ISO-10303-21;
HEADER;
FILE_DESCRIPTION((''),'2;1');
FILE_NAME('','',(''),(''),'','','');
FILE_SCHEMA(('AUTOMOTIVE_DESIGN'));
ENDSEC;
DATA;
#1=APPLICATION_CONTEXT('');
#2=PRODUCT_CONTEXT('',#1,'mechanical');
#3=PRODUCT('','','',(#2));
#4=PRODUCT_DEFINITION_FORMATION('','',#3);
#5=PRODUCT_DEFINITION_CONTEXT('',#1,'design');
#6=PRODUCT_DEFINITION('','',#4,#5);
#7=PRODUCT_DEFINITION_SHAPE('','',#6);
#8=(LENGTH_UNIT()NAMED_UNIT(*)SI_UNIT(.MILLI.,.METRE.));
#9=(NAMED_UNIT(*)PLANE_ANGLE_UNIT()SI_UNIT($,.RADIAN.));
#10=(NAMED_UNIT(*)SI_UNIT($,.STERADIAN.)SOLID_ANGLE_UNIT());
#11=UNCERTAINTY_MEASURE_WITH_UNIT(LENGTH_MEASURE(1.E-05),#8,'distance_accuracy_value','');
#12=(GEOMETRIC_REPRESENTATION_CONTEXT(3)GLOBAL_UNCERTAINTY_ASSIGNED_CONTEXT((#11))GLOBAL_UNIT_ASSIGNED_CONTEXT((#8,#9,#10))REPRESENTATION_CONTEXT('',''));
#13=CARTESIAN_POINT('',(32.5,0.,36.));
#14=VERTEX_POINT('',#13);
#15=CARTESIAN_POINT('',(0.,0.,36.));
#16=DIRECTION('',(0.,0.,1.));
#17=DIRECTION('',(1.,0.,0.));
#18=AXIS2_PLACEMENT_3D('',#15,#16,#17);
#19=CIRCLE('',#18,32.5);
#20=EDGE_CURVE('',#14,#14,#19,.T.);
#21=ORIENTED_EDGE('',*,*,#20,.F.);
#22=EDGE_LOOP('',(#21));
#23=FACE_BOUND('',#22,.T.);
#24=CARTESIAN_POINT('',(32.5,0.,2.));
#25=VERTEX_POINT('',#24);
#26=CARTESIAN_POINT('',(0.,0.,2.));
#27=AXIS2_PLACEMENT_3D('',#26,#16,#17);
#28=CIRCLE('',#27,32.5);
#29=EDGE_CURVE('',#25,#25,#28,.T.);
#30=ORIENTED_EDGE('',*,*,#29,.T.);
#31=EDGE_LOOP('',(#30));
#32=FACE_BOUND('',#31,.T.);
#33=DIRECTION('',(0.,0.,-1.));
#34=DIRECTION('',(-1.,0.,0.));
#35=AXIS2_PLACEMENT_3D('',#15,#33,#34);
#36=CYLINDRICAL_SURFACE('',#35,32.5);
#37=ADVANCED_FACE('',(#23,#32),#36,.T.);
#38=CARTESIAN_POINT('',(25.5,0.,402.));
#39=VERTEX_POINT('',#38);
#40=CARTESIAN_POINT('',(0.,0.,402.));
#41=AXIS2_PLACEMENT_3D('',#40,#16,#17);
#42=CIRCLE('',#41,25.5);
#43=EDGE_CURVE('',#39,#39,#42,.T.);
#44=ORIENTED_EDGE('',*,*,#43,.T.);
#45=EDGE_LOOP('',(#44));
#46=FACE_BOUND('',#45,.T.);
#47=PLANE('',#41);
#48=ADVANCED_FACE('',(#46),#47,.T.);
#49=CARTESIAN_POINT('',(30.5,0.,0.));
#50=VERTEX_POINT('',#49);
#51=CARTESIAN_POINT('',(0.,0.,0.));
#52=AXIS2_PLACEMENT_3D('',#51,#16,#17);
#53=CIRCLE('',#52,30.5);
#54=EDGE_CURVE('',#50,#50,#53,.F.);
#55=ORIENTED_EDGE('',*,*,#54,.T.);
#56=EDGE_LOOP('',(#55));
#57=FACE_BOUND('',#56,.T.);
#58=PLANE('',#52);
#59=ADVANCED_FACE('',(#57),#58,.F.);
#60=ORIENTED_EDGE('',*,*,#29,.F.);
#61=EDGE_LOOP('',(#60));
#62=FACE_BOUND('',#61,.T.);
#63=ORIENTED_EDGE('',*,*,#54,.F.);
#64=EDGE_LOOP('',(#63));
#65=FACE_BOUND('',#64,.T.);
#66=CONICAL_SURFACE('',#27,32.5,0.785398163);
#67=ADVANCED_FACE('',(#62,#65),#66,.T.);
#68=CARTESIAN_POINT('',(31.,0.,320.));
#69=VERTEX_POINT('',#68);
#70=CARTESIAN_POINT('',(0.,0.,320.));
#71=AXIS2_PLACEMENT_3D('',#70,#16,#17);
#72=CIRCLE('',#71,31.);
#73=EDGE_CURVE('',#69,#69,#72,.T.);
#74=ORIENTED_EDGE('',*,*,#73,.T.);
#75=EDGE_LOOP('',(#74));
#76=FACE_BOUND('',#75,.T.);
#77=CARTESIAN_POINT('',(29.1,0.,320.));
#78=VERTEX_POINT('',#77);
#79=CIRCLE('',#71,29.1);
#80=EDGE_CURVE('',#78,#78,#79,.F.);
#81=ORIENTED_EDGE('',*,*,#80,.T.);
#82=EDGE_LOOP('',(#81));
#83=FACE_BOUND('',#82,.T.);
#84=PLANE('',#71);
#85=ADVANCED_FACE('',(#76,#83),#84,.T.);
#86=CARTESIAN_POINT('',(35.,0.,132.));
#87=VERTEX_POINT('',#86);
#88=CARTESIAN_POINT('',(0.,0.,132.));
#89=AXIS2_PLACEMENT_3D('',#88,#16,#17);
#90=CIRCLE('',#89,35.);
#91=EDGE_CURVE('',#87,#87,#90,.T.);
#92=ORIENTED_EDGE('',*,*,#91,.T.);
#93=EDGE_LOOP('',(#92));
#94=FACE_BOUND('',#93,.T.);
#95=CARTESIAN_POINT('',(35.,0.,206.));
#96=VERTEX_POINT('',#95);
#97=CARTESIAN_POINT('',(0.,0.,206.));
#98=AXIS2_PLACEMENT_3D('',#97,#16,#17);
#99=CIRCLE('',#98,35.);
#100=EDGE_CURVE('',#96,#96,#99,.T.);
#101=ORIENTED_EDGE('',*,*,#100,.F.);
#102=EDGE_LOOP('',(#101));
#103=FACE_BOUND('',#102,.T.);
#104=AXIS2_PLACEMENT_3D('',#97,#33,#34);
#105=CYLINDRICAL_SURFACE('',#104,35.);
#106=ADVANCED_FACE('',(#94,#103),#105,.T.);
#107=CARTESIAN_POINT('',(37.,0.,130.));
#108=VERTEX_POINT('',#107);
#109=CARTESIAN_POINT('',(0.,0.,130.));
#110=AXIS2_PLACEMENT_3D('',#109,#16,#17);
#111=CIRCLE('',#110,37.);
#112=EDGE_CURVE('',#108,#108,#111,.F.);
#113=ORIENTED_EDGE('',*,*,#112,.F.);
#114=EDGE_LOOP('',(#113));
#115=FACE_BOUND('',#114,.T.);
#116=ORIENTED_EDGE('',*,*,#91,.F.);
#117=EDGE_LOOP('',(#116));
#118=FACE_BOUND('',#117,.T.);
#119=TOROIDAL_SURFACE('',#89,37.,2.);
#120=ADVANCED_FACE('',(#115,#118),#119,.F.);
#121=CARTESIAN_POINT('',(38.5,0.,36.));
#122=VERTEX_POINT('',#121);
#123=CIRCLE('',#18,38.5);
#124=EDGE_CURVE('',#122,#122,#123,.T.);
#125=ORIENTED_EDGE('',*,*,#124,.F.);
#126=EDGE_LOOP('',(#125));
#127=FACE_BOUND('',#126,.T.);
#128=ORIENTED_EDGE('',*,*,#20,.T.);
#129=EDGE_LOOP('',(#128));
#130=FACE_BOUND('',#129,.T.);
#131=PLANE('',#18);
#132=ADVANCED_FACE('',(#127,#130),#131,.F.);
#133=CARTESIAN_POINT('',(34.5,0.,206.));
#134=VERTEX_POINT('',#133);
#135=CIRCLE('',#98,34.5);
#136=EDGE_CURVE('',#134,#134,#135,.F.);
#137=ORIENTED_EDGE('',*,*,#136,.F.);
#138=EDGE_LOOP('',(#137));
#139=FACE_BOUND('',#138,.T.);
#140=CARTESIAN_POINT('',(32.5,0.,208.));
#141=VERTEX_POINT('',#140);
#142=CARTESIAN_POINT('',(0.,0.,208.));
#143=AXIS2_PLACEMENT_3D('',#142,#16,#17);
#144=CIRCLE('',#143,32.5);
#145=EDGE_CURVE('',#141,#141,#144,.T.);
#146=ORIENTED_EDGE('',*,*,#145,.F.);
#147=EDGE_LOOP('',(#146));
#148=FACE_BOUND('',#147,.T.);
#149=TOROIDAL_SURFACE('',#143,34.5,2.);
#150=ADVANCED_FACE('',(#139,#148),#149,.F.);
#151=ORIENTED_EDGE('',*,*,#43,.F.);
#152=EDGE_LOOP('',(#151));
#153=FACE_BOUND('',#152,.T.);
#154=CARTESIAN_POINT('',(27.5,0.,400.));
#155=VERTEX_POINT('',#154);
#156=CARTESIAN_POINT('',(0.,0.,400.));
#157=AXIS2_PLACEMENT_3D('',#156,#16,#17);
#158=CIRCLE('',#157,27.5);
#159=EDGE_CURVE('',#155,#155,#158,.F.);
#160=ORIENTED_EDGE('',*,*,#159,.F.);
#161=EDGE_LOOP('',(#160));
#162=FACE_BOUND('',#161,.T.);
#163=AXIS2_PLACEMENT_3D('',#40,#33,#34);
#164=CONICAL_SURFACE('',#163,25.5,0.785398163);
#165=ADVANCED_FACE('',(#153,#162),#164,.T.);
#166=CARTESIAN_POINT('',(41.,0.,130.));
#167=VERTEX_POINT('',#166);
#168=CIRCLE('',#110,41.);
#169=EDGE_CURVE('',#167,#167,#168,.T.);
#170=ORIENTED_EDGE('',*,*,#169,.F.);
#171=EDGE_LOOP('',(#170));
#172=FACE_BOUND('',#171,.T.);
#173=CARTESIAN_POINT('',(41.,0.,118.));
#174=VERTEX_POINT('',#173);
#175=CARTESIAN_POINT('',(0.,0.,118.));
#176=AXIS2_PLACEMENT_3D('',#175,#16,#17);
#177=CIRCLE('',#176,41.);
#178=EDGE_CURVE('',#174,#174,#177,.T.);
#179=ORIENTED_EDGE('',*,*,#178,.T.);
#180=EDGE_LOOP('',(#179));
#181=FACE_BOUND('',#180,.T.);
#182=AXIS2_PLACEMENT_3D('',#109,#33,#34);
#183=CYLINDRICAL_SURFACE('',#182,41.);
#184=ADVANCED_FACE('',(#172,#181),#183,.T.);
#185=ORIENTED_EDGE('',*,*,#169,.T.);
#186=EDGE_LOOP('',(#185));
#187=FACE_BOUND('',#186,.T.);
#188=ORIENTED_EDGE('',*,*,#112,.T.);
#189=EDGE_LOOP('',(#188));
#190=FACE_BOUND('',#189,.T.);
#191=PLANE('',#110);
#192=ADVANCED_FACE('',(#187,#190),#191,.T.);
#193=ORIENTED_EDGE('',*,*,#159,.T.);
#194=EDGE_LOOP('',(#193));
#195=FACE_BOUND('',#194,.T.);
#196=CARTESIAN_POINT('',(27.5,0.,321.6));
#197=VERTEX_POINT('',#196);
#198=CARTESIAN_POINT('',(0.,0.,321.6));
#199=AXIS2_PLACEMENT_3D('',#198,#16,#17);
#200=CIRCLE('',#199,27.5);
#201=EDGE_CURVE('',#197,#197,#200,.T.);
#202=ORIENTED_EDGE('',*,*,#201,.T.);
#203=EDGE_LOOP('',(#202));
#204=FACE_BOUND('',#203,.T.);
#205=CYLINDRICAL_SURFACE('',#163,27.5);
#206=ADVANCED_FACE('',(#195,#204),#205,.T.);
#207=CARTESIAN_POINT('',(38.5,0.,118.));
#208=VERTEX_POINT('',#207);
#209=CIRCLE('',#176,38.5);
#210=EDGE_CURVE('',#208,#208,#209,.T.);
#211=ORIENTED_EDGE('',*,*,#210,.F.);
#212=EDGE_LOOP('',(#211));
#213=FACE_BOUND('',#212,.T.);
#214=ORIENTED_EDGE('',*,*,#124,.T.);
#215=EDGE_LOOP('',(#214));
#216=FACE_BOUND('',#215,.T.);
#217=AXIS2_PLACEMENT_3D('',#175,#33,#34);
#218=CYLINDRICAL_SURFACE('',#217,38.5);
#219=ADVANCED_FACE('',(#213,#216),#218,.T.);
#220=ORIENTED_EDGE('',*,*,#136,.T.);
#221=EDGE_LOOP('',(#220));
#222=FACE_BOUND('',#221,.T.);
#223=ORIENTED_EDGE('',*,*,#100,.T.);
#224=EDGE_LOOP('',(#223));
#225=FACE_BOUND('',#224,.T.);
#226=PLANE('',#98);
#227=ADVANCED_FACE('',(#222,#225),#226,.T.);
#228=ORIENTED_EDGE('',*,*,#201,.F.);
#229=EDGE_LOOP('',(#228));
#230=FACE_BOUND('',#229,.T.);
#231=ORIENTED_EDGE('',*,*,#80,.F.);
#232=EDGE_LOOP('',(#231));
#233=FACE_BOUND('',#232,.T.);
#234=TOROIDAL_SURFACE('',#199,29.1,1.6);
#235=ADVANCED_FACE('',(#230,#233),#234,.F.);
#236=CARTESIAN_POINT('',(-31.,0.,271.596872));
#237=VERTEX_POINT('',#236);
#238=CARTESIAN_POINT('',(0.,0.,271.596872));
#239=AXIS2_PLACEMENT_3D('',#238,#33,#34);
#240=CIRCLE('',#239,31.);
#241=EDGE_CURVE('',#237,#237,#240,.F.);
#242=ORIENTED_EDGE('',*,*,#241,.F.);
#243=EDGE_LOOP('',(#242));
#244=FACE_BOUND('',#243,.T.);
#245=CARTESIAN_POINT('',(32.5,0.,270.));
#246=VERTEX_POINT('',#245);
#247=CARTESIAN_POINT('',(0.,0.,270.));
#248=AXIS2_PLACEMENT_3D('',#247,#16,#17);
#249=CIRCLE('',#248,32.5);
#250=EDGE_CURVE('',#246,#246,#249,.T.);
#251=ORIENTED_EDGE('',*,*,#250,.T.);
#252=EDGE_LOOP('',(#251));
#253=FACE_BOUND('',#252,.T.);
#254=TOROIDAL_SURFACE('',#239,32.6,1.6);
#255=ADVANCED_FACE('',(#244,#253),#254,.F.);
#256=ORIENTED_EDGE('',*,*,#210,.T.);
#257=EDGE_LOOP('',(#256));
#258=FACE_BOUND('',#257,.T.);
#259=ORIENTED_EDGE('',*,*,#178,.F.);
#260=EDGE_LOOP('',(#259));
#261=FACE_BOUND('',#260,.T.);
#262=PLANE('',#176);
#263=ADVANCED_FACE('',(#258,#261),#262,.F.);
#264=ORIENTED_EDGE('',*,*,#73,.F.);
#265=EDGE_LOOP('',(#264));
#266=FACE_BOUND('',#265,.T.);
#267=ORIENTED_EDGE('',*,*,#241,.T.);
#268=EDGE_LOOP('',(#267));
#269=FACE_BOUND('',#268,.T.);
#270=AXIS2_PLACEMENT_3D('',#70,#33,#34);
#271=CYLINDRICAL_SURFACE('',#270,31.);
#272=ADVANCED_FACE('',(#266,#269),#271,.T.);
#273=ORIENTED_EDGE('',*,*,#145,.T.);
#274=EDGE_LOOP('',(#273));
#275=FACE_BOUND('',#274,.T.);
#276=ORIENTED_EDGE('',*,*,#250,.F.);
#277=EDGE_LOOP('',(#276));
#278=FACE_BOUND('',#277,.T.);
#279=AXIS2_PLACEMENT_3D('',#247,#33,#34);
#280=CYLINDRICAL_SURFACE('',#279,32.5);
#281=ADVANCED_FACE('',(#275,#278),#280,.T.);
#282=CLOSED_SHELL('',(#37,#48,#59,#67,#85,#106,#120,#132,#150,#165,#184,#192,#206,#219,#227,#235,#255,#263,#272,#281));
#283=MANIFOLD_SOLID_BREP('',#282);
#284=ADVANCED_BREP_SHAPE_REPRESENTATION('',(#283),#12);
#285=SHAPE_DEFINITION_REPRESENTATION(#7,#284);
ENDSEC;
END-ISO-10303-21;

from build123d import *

# Parameters (mm, degrees)
SKETCH_1_R      = 32.5
EXTRUDE_1_DEPTH = 36
SKETCH_2_R      = 38.5
EXTRUDE_2_DEPTH = 82
SKETCH_3_R      = 41
EXTRUDE_3_DEPTH = 12
SKETCH_4_R      = 35
EXTRUDE_4_DEPTH = 76
SKETCH_5_R      = 32.5
EXTRUDE_5_DEPTH = 64
SKETCH_6_R      = 31
EXTRUDE_6_DEPTH = 50
SKETCH_7_R      = 27.5
EXTRUDE_7_DEPTH = 82
FILLET_1_R      = 2
FILLET_2_R      = 1.6
CHAMFER_1_SIZE  = 2


with BuildPart() as part:
    # 草图1 → 凸台-拉伸1 (new body)
    with BuildSketch(Plane.XY):
        Circle(SKETCH_1_R)
    extrude(amount=EXTRUDE_1_DEPTH)

    # 草图2 → 凸台-拉伸2 (add)
    with BuildSketch(Plane.XY.offset(36)):
        Circle(SKETCH_2_R)
    extrude(amount=EXTRUDE_2_DEPTH)

    # 草图3 → 凸台-拉伸3 (add)
    with BuildSketch(Plane.XY.offset(118)):
        Circle(SKETCH_3_R)
    extrude(amount=EXTRUDE_3_DEPTH)

    # 草图4 → 凸台-拉伸4 (add)
    with BuildSketch(Plane.XY.offset(130)):
        Circle(SKETCH_4_R)
    extrude(amount=EXTRUDE_4_DEPTH)

    # 草图5 → 凸台-拉伸5 (add)
    with BuildSketch(Plane.XY.offset(206)):
        Circle(SKETCH_5_R)
    extrude(amount=EXTRUDE_5_DEPTH)

    # 草图6 → 凸台-拉伸6 (add)
    with BuildSketch(Plane.XY.offset(270)):
        Circle(SKETCH_6_R)
    extrude(amount=EXTRUDE_6_DEPTH)

    # 草图7 → 凸台-拉伸7 (add)
    with BuildSketch(Plane.XY.offset(320)):
        Circle(SKETCH_7_R)
    extrude(amount=EXTRUDE_7_DEPTH)

    # 圆角1
    fillet_1_edges = [part.edges().sort_by_distance(p)[0] for p in [
        (-35, 0, 130),
        (-32.5, 0, 206),
    ]]
    fillet(fillet_1_edges, radius=FILLET_1_R)

    # 圆角2
    # the kernel refuses this fillet: 1.6 mm, written as the material it adds along each edge
    with BuildSketch(Plane(origin=(0, 0, 270), x_dir=(1, 0, 0), z_dir=(0, -1, 0))) as fillet_2_piece_1:
        with BuildLine():
            CenterArc((32.6, 1.596871942), FILLET_2_R, 180, 86.416678302)
            Line((31, 1.596871942), (30.968, 1.596871942))
            Line((30.968, 1.596871942), (30.968, 0))
            Line((30.968, 0), (31, -0.032))
            ThreePointArc((31, -0.032), (31.75, -0.032), (32.498, -0.031937439))
            Line((32.498, -0.031937439), (32.5, 0))
        make_face()
    revolve(axis=Axis((0, 0, 270), (0, 0, 1)))
    with BuildSketch(Plane(origin=(0, 0, 320), x_dir=(1, 0, 0), z_dir=(0, -1, 0))) as fillet_2_piece_2:
        with BuildLine():
            CenterArc((27.5 + FILLET_2_R, FILLET_2_R), FILLET_2_R, 180, 90)
            Line((27.5, FILLET_2_R), (27.5 - FILLET_2_R * 0.02, FILLET_2_R))
            Line((27.5 - FILLET_2_R * 0.02, FILLET_2_R), (27.5 - FILLET_2_R * 0.02, -FILLET_2_R * 0.02))
            Line((27.5 - FILLET_2_R * 0.02, -FILLET_2_R * 0.02), (27.5 + FILLET_2_R, -FILLET_2_R * 0.02))
            Line((27.5 + FILLET_2_R, -FILLET_2_R * 0.02), (27.5 + FILLET_2_R, 0))
        make_face()
    revolve(axis=Axis((0, 0, 320), (0, 0, 1)))

    # 倒角1
    chamfer_1_edges = [part.edges().sort_by_distance(p)[0] for p in [
        (-32.5, 0, 0),
        (-27.5, 0, 402),
    ]]
    chamfer(chamfer_1_edges, length=CHAMFER_1_SIZE)


solid = part.part
